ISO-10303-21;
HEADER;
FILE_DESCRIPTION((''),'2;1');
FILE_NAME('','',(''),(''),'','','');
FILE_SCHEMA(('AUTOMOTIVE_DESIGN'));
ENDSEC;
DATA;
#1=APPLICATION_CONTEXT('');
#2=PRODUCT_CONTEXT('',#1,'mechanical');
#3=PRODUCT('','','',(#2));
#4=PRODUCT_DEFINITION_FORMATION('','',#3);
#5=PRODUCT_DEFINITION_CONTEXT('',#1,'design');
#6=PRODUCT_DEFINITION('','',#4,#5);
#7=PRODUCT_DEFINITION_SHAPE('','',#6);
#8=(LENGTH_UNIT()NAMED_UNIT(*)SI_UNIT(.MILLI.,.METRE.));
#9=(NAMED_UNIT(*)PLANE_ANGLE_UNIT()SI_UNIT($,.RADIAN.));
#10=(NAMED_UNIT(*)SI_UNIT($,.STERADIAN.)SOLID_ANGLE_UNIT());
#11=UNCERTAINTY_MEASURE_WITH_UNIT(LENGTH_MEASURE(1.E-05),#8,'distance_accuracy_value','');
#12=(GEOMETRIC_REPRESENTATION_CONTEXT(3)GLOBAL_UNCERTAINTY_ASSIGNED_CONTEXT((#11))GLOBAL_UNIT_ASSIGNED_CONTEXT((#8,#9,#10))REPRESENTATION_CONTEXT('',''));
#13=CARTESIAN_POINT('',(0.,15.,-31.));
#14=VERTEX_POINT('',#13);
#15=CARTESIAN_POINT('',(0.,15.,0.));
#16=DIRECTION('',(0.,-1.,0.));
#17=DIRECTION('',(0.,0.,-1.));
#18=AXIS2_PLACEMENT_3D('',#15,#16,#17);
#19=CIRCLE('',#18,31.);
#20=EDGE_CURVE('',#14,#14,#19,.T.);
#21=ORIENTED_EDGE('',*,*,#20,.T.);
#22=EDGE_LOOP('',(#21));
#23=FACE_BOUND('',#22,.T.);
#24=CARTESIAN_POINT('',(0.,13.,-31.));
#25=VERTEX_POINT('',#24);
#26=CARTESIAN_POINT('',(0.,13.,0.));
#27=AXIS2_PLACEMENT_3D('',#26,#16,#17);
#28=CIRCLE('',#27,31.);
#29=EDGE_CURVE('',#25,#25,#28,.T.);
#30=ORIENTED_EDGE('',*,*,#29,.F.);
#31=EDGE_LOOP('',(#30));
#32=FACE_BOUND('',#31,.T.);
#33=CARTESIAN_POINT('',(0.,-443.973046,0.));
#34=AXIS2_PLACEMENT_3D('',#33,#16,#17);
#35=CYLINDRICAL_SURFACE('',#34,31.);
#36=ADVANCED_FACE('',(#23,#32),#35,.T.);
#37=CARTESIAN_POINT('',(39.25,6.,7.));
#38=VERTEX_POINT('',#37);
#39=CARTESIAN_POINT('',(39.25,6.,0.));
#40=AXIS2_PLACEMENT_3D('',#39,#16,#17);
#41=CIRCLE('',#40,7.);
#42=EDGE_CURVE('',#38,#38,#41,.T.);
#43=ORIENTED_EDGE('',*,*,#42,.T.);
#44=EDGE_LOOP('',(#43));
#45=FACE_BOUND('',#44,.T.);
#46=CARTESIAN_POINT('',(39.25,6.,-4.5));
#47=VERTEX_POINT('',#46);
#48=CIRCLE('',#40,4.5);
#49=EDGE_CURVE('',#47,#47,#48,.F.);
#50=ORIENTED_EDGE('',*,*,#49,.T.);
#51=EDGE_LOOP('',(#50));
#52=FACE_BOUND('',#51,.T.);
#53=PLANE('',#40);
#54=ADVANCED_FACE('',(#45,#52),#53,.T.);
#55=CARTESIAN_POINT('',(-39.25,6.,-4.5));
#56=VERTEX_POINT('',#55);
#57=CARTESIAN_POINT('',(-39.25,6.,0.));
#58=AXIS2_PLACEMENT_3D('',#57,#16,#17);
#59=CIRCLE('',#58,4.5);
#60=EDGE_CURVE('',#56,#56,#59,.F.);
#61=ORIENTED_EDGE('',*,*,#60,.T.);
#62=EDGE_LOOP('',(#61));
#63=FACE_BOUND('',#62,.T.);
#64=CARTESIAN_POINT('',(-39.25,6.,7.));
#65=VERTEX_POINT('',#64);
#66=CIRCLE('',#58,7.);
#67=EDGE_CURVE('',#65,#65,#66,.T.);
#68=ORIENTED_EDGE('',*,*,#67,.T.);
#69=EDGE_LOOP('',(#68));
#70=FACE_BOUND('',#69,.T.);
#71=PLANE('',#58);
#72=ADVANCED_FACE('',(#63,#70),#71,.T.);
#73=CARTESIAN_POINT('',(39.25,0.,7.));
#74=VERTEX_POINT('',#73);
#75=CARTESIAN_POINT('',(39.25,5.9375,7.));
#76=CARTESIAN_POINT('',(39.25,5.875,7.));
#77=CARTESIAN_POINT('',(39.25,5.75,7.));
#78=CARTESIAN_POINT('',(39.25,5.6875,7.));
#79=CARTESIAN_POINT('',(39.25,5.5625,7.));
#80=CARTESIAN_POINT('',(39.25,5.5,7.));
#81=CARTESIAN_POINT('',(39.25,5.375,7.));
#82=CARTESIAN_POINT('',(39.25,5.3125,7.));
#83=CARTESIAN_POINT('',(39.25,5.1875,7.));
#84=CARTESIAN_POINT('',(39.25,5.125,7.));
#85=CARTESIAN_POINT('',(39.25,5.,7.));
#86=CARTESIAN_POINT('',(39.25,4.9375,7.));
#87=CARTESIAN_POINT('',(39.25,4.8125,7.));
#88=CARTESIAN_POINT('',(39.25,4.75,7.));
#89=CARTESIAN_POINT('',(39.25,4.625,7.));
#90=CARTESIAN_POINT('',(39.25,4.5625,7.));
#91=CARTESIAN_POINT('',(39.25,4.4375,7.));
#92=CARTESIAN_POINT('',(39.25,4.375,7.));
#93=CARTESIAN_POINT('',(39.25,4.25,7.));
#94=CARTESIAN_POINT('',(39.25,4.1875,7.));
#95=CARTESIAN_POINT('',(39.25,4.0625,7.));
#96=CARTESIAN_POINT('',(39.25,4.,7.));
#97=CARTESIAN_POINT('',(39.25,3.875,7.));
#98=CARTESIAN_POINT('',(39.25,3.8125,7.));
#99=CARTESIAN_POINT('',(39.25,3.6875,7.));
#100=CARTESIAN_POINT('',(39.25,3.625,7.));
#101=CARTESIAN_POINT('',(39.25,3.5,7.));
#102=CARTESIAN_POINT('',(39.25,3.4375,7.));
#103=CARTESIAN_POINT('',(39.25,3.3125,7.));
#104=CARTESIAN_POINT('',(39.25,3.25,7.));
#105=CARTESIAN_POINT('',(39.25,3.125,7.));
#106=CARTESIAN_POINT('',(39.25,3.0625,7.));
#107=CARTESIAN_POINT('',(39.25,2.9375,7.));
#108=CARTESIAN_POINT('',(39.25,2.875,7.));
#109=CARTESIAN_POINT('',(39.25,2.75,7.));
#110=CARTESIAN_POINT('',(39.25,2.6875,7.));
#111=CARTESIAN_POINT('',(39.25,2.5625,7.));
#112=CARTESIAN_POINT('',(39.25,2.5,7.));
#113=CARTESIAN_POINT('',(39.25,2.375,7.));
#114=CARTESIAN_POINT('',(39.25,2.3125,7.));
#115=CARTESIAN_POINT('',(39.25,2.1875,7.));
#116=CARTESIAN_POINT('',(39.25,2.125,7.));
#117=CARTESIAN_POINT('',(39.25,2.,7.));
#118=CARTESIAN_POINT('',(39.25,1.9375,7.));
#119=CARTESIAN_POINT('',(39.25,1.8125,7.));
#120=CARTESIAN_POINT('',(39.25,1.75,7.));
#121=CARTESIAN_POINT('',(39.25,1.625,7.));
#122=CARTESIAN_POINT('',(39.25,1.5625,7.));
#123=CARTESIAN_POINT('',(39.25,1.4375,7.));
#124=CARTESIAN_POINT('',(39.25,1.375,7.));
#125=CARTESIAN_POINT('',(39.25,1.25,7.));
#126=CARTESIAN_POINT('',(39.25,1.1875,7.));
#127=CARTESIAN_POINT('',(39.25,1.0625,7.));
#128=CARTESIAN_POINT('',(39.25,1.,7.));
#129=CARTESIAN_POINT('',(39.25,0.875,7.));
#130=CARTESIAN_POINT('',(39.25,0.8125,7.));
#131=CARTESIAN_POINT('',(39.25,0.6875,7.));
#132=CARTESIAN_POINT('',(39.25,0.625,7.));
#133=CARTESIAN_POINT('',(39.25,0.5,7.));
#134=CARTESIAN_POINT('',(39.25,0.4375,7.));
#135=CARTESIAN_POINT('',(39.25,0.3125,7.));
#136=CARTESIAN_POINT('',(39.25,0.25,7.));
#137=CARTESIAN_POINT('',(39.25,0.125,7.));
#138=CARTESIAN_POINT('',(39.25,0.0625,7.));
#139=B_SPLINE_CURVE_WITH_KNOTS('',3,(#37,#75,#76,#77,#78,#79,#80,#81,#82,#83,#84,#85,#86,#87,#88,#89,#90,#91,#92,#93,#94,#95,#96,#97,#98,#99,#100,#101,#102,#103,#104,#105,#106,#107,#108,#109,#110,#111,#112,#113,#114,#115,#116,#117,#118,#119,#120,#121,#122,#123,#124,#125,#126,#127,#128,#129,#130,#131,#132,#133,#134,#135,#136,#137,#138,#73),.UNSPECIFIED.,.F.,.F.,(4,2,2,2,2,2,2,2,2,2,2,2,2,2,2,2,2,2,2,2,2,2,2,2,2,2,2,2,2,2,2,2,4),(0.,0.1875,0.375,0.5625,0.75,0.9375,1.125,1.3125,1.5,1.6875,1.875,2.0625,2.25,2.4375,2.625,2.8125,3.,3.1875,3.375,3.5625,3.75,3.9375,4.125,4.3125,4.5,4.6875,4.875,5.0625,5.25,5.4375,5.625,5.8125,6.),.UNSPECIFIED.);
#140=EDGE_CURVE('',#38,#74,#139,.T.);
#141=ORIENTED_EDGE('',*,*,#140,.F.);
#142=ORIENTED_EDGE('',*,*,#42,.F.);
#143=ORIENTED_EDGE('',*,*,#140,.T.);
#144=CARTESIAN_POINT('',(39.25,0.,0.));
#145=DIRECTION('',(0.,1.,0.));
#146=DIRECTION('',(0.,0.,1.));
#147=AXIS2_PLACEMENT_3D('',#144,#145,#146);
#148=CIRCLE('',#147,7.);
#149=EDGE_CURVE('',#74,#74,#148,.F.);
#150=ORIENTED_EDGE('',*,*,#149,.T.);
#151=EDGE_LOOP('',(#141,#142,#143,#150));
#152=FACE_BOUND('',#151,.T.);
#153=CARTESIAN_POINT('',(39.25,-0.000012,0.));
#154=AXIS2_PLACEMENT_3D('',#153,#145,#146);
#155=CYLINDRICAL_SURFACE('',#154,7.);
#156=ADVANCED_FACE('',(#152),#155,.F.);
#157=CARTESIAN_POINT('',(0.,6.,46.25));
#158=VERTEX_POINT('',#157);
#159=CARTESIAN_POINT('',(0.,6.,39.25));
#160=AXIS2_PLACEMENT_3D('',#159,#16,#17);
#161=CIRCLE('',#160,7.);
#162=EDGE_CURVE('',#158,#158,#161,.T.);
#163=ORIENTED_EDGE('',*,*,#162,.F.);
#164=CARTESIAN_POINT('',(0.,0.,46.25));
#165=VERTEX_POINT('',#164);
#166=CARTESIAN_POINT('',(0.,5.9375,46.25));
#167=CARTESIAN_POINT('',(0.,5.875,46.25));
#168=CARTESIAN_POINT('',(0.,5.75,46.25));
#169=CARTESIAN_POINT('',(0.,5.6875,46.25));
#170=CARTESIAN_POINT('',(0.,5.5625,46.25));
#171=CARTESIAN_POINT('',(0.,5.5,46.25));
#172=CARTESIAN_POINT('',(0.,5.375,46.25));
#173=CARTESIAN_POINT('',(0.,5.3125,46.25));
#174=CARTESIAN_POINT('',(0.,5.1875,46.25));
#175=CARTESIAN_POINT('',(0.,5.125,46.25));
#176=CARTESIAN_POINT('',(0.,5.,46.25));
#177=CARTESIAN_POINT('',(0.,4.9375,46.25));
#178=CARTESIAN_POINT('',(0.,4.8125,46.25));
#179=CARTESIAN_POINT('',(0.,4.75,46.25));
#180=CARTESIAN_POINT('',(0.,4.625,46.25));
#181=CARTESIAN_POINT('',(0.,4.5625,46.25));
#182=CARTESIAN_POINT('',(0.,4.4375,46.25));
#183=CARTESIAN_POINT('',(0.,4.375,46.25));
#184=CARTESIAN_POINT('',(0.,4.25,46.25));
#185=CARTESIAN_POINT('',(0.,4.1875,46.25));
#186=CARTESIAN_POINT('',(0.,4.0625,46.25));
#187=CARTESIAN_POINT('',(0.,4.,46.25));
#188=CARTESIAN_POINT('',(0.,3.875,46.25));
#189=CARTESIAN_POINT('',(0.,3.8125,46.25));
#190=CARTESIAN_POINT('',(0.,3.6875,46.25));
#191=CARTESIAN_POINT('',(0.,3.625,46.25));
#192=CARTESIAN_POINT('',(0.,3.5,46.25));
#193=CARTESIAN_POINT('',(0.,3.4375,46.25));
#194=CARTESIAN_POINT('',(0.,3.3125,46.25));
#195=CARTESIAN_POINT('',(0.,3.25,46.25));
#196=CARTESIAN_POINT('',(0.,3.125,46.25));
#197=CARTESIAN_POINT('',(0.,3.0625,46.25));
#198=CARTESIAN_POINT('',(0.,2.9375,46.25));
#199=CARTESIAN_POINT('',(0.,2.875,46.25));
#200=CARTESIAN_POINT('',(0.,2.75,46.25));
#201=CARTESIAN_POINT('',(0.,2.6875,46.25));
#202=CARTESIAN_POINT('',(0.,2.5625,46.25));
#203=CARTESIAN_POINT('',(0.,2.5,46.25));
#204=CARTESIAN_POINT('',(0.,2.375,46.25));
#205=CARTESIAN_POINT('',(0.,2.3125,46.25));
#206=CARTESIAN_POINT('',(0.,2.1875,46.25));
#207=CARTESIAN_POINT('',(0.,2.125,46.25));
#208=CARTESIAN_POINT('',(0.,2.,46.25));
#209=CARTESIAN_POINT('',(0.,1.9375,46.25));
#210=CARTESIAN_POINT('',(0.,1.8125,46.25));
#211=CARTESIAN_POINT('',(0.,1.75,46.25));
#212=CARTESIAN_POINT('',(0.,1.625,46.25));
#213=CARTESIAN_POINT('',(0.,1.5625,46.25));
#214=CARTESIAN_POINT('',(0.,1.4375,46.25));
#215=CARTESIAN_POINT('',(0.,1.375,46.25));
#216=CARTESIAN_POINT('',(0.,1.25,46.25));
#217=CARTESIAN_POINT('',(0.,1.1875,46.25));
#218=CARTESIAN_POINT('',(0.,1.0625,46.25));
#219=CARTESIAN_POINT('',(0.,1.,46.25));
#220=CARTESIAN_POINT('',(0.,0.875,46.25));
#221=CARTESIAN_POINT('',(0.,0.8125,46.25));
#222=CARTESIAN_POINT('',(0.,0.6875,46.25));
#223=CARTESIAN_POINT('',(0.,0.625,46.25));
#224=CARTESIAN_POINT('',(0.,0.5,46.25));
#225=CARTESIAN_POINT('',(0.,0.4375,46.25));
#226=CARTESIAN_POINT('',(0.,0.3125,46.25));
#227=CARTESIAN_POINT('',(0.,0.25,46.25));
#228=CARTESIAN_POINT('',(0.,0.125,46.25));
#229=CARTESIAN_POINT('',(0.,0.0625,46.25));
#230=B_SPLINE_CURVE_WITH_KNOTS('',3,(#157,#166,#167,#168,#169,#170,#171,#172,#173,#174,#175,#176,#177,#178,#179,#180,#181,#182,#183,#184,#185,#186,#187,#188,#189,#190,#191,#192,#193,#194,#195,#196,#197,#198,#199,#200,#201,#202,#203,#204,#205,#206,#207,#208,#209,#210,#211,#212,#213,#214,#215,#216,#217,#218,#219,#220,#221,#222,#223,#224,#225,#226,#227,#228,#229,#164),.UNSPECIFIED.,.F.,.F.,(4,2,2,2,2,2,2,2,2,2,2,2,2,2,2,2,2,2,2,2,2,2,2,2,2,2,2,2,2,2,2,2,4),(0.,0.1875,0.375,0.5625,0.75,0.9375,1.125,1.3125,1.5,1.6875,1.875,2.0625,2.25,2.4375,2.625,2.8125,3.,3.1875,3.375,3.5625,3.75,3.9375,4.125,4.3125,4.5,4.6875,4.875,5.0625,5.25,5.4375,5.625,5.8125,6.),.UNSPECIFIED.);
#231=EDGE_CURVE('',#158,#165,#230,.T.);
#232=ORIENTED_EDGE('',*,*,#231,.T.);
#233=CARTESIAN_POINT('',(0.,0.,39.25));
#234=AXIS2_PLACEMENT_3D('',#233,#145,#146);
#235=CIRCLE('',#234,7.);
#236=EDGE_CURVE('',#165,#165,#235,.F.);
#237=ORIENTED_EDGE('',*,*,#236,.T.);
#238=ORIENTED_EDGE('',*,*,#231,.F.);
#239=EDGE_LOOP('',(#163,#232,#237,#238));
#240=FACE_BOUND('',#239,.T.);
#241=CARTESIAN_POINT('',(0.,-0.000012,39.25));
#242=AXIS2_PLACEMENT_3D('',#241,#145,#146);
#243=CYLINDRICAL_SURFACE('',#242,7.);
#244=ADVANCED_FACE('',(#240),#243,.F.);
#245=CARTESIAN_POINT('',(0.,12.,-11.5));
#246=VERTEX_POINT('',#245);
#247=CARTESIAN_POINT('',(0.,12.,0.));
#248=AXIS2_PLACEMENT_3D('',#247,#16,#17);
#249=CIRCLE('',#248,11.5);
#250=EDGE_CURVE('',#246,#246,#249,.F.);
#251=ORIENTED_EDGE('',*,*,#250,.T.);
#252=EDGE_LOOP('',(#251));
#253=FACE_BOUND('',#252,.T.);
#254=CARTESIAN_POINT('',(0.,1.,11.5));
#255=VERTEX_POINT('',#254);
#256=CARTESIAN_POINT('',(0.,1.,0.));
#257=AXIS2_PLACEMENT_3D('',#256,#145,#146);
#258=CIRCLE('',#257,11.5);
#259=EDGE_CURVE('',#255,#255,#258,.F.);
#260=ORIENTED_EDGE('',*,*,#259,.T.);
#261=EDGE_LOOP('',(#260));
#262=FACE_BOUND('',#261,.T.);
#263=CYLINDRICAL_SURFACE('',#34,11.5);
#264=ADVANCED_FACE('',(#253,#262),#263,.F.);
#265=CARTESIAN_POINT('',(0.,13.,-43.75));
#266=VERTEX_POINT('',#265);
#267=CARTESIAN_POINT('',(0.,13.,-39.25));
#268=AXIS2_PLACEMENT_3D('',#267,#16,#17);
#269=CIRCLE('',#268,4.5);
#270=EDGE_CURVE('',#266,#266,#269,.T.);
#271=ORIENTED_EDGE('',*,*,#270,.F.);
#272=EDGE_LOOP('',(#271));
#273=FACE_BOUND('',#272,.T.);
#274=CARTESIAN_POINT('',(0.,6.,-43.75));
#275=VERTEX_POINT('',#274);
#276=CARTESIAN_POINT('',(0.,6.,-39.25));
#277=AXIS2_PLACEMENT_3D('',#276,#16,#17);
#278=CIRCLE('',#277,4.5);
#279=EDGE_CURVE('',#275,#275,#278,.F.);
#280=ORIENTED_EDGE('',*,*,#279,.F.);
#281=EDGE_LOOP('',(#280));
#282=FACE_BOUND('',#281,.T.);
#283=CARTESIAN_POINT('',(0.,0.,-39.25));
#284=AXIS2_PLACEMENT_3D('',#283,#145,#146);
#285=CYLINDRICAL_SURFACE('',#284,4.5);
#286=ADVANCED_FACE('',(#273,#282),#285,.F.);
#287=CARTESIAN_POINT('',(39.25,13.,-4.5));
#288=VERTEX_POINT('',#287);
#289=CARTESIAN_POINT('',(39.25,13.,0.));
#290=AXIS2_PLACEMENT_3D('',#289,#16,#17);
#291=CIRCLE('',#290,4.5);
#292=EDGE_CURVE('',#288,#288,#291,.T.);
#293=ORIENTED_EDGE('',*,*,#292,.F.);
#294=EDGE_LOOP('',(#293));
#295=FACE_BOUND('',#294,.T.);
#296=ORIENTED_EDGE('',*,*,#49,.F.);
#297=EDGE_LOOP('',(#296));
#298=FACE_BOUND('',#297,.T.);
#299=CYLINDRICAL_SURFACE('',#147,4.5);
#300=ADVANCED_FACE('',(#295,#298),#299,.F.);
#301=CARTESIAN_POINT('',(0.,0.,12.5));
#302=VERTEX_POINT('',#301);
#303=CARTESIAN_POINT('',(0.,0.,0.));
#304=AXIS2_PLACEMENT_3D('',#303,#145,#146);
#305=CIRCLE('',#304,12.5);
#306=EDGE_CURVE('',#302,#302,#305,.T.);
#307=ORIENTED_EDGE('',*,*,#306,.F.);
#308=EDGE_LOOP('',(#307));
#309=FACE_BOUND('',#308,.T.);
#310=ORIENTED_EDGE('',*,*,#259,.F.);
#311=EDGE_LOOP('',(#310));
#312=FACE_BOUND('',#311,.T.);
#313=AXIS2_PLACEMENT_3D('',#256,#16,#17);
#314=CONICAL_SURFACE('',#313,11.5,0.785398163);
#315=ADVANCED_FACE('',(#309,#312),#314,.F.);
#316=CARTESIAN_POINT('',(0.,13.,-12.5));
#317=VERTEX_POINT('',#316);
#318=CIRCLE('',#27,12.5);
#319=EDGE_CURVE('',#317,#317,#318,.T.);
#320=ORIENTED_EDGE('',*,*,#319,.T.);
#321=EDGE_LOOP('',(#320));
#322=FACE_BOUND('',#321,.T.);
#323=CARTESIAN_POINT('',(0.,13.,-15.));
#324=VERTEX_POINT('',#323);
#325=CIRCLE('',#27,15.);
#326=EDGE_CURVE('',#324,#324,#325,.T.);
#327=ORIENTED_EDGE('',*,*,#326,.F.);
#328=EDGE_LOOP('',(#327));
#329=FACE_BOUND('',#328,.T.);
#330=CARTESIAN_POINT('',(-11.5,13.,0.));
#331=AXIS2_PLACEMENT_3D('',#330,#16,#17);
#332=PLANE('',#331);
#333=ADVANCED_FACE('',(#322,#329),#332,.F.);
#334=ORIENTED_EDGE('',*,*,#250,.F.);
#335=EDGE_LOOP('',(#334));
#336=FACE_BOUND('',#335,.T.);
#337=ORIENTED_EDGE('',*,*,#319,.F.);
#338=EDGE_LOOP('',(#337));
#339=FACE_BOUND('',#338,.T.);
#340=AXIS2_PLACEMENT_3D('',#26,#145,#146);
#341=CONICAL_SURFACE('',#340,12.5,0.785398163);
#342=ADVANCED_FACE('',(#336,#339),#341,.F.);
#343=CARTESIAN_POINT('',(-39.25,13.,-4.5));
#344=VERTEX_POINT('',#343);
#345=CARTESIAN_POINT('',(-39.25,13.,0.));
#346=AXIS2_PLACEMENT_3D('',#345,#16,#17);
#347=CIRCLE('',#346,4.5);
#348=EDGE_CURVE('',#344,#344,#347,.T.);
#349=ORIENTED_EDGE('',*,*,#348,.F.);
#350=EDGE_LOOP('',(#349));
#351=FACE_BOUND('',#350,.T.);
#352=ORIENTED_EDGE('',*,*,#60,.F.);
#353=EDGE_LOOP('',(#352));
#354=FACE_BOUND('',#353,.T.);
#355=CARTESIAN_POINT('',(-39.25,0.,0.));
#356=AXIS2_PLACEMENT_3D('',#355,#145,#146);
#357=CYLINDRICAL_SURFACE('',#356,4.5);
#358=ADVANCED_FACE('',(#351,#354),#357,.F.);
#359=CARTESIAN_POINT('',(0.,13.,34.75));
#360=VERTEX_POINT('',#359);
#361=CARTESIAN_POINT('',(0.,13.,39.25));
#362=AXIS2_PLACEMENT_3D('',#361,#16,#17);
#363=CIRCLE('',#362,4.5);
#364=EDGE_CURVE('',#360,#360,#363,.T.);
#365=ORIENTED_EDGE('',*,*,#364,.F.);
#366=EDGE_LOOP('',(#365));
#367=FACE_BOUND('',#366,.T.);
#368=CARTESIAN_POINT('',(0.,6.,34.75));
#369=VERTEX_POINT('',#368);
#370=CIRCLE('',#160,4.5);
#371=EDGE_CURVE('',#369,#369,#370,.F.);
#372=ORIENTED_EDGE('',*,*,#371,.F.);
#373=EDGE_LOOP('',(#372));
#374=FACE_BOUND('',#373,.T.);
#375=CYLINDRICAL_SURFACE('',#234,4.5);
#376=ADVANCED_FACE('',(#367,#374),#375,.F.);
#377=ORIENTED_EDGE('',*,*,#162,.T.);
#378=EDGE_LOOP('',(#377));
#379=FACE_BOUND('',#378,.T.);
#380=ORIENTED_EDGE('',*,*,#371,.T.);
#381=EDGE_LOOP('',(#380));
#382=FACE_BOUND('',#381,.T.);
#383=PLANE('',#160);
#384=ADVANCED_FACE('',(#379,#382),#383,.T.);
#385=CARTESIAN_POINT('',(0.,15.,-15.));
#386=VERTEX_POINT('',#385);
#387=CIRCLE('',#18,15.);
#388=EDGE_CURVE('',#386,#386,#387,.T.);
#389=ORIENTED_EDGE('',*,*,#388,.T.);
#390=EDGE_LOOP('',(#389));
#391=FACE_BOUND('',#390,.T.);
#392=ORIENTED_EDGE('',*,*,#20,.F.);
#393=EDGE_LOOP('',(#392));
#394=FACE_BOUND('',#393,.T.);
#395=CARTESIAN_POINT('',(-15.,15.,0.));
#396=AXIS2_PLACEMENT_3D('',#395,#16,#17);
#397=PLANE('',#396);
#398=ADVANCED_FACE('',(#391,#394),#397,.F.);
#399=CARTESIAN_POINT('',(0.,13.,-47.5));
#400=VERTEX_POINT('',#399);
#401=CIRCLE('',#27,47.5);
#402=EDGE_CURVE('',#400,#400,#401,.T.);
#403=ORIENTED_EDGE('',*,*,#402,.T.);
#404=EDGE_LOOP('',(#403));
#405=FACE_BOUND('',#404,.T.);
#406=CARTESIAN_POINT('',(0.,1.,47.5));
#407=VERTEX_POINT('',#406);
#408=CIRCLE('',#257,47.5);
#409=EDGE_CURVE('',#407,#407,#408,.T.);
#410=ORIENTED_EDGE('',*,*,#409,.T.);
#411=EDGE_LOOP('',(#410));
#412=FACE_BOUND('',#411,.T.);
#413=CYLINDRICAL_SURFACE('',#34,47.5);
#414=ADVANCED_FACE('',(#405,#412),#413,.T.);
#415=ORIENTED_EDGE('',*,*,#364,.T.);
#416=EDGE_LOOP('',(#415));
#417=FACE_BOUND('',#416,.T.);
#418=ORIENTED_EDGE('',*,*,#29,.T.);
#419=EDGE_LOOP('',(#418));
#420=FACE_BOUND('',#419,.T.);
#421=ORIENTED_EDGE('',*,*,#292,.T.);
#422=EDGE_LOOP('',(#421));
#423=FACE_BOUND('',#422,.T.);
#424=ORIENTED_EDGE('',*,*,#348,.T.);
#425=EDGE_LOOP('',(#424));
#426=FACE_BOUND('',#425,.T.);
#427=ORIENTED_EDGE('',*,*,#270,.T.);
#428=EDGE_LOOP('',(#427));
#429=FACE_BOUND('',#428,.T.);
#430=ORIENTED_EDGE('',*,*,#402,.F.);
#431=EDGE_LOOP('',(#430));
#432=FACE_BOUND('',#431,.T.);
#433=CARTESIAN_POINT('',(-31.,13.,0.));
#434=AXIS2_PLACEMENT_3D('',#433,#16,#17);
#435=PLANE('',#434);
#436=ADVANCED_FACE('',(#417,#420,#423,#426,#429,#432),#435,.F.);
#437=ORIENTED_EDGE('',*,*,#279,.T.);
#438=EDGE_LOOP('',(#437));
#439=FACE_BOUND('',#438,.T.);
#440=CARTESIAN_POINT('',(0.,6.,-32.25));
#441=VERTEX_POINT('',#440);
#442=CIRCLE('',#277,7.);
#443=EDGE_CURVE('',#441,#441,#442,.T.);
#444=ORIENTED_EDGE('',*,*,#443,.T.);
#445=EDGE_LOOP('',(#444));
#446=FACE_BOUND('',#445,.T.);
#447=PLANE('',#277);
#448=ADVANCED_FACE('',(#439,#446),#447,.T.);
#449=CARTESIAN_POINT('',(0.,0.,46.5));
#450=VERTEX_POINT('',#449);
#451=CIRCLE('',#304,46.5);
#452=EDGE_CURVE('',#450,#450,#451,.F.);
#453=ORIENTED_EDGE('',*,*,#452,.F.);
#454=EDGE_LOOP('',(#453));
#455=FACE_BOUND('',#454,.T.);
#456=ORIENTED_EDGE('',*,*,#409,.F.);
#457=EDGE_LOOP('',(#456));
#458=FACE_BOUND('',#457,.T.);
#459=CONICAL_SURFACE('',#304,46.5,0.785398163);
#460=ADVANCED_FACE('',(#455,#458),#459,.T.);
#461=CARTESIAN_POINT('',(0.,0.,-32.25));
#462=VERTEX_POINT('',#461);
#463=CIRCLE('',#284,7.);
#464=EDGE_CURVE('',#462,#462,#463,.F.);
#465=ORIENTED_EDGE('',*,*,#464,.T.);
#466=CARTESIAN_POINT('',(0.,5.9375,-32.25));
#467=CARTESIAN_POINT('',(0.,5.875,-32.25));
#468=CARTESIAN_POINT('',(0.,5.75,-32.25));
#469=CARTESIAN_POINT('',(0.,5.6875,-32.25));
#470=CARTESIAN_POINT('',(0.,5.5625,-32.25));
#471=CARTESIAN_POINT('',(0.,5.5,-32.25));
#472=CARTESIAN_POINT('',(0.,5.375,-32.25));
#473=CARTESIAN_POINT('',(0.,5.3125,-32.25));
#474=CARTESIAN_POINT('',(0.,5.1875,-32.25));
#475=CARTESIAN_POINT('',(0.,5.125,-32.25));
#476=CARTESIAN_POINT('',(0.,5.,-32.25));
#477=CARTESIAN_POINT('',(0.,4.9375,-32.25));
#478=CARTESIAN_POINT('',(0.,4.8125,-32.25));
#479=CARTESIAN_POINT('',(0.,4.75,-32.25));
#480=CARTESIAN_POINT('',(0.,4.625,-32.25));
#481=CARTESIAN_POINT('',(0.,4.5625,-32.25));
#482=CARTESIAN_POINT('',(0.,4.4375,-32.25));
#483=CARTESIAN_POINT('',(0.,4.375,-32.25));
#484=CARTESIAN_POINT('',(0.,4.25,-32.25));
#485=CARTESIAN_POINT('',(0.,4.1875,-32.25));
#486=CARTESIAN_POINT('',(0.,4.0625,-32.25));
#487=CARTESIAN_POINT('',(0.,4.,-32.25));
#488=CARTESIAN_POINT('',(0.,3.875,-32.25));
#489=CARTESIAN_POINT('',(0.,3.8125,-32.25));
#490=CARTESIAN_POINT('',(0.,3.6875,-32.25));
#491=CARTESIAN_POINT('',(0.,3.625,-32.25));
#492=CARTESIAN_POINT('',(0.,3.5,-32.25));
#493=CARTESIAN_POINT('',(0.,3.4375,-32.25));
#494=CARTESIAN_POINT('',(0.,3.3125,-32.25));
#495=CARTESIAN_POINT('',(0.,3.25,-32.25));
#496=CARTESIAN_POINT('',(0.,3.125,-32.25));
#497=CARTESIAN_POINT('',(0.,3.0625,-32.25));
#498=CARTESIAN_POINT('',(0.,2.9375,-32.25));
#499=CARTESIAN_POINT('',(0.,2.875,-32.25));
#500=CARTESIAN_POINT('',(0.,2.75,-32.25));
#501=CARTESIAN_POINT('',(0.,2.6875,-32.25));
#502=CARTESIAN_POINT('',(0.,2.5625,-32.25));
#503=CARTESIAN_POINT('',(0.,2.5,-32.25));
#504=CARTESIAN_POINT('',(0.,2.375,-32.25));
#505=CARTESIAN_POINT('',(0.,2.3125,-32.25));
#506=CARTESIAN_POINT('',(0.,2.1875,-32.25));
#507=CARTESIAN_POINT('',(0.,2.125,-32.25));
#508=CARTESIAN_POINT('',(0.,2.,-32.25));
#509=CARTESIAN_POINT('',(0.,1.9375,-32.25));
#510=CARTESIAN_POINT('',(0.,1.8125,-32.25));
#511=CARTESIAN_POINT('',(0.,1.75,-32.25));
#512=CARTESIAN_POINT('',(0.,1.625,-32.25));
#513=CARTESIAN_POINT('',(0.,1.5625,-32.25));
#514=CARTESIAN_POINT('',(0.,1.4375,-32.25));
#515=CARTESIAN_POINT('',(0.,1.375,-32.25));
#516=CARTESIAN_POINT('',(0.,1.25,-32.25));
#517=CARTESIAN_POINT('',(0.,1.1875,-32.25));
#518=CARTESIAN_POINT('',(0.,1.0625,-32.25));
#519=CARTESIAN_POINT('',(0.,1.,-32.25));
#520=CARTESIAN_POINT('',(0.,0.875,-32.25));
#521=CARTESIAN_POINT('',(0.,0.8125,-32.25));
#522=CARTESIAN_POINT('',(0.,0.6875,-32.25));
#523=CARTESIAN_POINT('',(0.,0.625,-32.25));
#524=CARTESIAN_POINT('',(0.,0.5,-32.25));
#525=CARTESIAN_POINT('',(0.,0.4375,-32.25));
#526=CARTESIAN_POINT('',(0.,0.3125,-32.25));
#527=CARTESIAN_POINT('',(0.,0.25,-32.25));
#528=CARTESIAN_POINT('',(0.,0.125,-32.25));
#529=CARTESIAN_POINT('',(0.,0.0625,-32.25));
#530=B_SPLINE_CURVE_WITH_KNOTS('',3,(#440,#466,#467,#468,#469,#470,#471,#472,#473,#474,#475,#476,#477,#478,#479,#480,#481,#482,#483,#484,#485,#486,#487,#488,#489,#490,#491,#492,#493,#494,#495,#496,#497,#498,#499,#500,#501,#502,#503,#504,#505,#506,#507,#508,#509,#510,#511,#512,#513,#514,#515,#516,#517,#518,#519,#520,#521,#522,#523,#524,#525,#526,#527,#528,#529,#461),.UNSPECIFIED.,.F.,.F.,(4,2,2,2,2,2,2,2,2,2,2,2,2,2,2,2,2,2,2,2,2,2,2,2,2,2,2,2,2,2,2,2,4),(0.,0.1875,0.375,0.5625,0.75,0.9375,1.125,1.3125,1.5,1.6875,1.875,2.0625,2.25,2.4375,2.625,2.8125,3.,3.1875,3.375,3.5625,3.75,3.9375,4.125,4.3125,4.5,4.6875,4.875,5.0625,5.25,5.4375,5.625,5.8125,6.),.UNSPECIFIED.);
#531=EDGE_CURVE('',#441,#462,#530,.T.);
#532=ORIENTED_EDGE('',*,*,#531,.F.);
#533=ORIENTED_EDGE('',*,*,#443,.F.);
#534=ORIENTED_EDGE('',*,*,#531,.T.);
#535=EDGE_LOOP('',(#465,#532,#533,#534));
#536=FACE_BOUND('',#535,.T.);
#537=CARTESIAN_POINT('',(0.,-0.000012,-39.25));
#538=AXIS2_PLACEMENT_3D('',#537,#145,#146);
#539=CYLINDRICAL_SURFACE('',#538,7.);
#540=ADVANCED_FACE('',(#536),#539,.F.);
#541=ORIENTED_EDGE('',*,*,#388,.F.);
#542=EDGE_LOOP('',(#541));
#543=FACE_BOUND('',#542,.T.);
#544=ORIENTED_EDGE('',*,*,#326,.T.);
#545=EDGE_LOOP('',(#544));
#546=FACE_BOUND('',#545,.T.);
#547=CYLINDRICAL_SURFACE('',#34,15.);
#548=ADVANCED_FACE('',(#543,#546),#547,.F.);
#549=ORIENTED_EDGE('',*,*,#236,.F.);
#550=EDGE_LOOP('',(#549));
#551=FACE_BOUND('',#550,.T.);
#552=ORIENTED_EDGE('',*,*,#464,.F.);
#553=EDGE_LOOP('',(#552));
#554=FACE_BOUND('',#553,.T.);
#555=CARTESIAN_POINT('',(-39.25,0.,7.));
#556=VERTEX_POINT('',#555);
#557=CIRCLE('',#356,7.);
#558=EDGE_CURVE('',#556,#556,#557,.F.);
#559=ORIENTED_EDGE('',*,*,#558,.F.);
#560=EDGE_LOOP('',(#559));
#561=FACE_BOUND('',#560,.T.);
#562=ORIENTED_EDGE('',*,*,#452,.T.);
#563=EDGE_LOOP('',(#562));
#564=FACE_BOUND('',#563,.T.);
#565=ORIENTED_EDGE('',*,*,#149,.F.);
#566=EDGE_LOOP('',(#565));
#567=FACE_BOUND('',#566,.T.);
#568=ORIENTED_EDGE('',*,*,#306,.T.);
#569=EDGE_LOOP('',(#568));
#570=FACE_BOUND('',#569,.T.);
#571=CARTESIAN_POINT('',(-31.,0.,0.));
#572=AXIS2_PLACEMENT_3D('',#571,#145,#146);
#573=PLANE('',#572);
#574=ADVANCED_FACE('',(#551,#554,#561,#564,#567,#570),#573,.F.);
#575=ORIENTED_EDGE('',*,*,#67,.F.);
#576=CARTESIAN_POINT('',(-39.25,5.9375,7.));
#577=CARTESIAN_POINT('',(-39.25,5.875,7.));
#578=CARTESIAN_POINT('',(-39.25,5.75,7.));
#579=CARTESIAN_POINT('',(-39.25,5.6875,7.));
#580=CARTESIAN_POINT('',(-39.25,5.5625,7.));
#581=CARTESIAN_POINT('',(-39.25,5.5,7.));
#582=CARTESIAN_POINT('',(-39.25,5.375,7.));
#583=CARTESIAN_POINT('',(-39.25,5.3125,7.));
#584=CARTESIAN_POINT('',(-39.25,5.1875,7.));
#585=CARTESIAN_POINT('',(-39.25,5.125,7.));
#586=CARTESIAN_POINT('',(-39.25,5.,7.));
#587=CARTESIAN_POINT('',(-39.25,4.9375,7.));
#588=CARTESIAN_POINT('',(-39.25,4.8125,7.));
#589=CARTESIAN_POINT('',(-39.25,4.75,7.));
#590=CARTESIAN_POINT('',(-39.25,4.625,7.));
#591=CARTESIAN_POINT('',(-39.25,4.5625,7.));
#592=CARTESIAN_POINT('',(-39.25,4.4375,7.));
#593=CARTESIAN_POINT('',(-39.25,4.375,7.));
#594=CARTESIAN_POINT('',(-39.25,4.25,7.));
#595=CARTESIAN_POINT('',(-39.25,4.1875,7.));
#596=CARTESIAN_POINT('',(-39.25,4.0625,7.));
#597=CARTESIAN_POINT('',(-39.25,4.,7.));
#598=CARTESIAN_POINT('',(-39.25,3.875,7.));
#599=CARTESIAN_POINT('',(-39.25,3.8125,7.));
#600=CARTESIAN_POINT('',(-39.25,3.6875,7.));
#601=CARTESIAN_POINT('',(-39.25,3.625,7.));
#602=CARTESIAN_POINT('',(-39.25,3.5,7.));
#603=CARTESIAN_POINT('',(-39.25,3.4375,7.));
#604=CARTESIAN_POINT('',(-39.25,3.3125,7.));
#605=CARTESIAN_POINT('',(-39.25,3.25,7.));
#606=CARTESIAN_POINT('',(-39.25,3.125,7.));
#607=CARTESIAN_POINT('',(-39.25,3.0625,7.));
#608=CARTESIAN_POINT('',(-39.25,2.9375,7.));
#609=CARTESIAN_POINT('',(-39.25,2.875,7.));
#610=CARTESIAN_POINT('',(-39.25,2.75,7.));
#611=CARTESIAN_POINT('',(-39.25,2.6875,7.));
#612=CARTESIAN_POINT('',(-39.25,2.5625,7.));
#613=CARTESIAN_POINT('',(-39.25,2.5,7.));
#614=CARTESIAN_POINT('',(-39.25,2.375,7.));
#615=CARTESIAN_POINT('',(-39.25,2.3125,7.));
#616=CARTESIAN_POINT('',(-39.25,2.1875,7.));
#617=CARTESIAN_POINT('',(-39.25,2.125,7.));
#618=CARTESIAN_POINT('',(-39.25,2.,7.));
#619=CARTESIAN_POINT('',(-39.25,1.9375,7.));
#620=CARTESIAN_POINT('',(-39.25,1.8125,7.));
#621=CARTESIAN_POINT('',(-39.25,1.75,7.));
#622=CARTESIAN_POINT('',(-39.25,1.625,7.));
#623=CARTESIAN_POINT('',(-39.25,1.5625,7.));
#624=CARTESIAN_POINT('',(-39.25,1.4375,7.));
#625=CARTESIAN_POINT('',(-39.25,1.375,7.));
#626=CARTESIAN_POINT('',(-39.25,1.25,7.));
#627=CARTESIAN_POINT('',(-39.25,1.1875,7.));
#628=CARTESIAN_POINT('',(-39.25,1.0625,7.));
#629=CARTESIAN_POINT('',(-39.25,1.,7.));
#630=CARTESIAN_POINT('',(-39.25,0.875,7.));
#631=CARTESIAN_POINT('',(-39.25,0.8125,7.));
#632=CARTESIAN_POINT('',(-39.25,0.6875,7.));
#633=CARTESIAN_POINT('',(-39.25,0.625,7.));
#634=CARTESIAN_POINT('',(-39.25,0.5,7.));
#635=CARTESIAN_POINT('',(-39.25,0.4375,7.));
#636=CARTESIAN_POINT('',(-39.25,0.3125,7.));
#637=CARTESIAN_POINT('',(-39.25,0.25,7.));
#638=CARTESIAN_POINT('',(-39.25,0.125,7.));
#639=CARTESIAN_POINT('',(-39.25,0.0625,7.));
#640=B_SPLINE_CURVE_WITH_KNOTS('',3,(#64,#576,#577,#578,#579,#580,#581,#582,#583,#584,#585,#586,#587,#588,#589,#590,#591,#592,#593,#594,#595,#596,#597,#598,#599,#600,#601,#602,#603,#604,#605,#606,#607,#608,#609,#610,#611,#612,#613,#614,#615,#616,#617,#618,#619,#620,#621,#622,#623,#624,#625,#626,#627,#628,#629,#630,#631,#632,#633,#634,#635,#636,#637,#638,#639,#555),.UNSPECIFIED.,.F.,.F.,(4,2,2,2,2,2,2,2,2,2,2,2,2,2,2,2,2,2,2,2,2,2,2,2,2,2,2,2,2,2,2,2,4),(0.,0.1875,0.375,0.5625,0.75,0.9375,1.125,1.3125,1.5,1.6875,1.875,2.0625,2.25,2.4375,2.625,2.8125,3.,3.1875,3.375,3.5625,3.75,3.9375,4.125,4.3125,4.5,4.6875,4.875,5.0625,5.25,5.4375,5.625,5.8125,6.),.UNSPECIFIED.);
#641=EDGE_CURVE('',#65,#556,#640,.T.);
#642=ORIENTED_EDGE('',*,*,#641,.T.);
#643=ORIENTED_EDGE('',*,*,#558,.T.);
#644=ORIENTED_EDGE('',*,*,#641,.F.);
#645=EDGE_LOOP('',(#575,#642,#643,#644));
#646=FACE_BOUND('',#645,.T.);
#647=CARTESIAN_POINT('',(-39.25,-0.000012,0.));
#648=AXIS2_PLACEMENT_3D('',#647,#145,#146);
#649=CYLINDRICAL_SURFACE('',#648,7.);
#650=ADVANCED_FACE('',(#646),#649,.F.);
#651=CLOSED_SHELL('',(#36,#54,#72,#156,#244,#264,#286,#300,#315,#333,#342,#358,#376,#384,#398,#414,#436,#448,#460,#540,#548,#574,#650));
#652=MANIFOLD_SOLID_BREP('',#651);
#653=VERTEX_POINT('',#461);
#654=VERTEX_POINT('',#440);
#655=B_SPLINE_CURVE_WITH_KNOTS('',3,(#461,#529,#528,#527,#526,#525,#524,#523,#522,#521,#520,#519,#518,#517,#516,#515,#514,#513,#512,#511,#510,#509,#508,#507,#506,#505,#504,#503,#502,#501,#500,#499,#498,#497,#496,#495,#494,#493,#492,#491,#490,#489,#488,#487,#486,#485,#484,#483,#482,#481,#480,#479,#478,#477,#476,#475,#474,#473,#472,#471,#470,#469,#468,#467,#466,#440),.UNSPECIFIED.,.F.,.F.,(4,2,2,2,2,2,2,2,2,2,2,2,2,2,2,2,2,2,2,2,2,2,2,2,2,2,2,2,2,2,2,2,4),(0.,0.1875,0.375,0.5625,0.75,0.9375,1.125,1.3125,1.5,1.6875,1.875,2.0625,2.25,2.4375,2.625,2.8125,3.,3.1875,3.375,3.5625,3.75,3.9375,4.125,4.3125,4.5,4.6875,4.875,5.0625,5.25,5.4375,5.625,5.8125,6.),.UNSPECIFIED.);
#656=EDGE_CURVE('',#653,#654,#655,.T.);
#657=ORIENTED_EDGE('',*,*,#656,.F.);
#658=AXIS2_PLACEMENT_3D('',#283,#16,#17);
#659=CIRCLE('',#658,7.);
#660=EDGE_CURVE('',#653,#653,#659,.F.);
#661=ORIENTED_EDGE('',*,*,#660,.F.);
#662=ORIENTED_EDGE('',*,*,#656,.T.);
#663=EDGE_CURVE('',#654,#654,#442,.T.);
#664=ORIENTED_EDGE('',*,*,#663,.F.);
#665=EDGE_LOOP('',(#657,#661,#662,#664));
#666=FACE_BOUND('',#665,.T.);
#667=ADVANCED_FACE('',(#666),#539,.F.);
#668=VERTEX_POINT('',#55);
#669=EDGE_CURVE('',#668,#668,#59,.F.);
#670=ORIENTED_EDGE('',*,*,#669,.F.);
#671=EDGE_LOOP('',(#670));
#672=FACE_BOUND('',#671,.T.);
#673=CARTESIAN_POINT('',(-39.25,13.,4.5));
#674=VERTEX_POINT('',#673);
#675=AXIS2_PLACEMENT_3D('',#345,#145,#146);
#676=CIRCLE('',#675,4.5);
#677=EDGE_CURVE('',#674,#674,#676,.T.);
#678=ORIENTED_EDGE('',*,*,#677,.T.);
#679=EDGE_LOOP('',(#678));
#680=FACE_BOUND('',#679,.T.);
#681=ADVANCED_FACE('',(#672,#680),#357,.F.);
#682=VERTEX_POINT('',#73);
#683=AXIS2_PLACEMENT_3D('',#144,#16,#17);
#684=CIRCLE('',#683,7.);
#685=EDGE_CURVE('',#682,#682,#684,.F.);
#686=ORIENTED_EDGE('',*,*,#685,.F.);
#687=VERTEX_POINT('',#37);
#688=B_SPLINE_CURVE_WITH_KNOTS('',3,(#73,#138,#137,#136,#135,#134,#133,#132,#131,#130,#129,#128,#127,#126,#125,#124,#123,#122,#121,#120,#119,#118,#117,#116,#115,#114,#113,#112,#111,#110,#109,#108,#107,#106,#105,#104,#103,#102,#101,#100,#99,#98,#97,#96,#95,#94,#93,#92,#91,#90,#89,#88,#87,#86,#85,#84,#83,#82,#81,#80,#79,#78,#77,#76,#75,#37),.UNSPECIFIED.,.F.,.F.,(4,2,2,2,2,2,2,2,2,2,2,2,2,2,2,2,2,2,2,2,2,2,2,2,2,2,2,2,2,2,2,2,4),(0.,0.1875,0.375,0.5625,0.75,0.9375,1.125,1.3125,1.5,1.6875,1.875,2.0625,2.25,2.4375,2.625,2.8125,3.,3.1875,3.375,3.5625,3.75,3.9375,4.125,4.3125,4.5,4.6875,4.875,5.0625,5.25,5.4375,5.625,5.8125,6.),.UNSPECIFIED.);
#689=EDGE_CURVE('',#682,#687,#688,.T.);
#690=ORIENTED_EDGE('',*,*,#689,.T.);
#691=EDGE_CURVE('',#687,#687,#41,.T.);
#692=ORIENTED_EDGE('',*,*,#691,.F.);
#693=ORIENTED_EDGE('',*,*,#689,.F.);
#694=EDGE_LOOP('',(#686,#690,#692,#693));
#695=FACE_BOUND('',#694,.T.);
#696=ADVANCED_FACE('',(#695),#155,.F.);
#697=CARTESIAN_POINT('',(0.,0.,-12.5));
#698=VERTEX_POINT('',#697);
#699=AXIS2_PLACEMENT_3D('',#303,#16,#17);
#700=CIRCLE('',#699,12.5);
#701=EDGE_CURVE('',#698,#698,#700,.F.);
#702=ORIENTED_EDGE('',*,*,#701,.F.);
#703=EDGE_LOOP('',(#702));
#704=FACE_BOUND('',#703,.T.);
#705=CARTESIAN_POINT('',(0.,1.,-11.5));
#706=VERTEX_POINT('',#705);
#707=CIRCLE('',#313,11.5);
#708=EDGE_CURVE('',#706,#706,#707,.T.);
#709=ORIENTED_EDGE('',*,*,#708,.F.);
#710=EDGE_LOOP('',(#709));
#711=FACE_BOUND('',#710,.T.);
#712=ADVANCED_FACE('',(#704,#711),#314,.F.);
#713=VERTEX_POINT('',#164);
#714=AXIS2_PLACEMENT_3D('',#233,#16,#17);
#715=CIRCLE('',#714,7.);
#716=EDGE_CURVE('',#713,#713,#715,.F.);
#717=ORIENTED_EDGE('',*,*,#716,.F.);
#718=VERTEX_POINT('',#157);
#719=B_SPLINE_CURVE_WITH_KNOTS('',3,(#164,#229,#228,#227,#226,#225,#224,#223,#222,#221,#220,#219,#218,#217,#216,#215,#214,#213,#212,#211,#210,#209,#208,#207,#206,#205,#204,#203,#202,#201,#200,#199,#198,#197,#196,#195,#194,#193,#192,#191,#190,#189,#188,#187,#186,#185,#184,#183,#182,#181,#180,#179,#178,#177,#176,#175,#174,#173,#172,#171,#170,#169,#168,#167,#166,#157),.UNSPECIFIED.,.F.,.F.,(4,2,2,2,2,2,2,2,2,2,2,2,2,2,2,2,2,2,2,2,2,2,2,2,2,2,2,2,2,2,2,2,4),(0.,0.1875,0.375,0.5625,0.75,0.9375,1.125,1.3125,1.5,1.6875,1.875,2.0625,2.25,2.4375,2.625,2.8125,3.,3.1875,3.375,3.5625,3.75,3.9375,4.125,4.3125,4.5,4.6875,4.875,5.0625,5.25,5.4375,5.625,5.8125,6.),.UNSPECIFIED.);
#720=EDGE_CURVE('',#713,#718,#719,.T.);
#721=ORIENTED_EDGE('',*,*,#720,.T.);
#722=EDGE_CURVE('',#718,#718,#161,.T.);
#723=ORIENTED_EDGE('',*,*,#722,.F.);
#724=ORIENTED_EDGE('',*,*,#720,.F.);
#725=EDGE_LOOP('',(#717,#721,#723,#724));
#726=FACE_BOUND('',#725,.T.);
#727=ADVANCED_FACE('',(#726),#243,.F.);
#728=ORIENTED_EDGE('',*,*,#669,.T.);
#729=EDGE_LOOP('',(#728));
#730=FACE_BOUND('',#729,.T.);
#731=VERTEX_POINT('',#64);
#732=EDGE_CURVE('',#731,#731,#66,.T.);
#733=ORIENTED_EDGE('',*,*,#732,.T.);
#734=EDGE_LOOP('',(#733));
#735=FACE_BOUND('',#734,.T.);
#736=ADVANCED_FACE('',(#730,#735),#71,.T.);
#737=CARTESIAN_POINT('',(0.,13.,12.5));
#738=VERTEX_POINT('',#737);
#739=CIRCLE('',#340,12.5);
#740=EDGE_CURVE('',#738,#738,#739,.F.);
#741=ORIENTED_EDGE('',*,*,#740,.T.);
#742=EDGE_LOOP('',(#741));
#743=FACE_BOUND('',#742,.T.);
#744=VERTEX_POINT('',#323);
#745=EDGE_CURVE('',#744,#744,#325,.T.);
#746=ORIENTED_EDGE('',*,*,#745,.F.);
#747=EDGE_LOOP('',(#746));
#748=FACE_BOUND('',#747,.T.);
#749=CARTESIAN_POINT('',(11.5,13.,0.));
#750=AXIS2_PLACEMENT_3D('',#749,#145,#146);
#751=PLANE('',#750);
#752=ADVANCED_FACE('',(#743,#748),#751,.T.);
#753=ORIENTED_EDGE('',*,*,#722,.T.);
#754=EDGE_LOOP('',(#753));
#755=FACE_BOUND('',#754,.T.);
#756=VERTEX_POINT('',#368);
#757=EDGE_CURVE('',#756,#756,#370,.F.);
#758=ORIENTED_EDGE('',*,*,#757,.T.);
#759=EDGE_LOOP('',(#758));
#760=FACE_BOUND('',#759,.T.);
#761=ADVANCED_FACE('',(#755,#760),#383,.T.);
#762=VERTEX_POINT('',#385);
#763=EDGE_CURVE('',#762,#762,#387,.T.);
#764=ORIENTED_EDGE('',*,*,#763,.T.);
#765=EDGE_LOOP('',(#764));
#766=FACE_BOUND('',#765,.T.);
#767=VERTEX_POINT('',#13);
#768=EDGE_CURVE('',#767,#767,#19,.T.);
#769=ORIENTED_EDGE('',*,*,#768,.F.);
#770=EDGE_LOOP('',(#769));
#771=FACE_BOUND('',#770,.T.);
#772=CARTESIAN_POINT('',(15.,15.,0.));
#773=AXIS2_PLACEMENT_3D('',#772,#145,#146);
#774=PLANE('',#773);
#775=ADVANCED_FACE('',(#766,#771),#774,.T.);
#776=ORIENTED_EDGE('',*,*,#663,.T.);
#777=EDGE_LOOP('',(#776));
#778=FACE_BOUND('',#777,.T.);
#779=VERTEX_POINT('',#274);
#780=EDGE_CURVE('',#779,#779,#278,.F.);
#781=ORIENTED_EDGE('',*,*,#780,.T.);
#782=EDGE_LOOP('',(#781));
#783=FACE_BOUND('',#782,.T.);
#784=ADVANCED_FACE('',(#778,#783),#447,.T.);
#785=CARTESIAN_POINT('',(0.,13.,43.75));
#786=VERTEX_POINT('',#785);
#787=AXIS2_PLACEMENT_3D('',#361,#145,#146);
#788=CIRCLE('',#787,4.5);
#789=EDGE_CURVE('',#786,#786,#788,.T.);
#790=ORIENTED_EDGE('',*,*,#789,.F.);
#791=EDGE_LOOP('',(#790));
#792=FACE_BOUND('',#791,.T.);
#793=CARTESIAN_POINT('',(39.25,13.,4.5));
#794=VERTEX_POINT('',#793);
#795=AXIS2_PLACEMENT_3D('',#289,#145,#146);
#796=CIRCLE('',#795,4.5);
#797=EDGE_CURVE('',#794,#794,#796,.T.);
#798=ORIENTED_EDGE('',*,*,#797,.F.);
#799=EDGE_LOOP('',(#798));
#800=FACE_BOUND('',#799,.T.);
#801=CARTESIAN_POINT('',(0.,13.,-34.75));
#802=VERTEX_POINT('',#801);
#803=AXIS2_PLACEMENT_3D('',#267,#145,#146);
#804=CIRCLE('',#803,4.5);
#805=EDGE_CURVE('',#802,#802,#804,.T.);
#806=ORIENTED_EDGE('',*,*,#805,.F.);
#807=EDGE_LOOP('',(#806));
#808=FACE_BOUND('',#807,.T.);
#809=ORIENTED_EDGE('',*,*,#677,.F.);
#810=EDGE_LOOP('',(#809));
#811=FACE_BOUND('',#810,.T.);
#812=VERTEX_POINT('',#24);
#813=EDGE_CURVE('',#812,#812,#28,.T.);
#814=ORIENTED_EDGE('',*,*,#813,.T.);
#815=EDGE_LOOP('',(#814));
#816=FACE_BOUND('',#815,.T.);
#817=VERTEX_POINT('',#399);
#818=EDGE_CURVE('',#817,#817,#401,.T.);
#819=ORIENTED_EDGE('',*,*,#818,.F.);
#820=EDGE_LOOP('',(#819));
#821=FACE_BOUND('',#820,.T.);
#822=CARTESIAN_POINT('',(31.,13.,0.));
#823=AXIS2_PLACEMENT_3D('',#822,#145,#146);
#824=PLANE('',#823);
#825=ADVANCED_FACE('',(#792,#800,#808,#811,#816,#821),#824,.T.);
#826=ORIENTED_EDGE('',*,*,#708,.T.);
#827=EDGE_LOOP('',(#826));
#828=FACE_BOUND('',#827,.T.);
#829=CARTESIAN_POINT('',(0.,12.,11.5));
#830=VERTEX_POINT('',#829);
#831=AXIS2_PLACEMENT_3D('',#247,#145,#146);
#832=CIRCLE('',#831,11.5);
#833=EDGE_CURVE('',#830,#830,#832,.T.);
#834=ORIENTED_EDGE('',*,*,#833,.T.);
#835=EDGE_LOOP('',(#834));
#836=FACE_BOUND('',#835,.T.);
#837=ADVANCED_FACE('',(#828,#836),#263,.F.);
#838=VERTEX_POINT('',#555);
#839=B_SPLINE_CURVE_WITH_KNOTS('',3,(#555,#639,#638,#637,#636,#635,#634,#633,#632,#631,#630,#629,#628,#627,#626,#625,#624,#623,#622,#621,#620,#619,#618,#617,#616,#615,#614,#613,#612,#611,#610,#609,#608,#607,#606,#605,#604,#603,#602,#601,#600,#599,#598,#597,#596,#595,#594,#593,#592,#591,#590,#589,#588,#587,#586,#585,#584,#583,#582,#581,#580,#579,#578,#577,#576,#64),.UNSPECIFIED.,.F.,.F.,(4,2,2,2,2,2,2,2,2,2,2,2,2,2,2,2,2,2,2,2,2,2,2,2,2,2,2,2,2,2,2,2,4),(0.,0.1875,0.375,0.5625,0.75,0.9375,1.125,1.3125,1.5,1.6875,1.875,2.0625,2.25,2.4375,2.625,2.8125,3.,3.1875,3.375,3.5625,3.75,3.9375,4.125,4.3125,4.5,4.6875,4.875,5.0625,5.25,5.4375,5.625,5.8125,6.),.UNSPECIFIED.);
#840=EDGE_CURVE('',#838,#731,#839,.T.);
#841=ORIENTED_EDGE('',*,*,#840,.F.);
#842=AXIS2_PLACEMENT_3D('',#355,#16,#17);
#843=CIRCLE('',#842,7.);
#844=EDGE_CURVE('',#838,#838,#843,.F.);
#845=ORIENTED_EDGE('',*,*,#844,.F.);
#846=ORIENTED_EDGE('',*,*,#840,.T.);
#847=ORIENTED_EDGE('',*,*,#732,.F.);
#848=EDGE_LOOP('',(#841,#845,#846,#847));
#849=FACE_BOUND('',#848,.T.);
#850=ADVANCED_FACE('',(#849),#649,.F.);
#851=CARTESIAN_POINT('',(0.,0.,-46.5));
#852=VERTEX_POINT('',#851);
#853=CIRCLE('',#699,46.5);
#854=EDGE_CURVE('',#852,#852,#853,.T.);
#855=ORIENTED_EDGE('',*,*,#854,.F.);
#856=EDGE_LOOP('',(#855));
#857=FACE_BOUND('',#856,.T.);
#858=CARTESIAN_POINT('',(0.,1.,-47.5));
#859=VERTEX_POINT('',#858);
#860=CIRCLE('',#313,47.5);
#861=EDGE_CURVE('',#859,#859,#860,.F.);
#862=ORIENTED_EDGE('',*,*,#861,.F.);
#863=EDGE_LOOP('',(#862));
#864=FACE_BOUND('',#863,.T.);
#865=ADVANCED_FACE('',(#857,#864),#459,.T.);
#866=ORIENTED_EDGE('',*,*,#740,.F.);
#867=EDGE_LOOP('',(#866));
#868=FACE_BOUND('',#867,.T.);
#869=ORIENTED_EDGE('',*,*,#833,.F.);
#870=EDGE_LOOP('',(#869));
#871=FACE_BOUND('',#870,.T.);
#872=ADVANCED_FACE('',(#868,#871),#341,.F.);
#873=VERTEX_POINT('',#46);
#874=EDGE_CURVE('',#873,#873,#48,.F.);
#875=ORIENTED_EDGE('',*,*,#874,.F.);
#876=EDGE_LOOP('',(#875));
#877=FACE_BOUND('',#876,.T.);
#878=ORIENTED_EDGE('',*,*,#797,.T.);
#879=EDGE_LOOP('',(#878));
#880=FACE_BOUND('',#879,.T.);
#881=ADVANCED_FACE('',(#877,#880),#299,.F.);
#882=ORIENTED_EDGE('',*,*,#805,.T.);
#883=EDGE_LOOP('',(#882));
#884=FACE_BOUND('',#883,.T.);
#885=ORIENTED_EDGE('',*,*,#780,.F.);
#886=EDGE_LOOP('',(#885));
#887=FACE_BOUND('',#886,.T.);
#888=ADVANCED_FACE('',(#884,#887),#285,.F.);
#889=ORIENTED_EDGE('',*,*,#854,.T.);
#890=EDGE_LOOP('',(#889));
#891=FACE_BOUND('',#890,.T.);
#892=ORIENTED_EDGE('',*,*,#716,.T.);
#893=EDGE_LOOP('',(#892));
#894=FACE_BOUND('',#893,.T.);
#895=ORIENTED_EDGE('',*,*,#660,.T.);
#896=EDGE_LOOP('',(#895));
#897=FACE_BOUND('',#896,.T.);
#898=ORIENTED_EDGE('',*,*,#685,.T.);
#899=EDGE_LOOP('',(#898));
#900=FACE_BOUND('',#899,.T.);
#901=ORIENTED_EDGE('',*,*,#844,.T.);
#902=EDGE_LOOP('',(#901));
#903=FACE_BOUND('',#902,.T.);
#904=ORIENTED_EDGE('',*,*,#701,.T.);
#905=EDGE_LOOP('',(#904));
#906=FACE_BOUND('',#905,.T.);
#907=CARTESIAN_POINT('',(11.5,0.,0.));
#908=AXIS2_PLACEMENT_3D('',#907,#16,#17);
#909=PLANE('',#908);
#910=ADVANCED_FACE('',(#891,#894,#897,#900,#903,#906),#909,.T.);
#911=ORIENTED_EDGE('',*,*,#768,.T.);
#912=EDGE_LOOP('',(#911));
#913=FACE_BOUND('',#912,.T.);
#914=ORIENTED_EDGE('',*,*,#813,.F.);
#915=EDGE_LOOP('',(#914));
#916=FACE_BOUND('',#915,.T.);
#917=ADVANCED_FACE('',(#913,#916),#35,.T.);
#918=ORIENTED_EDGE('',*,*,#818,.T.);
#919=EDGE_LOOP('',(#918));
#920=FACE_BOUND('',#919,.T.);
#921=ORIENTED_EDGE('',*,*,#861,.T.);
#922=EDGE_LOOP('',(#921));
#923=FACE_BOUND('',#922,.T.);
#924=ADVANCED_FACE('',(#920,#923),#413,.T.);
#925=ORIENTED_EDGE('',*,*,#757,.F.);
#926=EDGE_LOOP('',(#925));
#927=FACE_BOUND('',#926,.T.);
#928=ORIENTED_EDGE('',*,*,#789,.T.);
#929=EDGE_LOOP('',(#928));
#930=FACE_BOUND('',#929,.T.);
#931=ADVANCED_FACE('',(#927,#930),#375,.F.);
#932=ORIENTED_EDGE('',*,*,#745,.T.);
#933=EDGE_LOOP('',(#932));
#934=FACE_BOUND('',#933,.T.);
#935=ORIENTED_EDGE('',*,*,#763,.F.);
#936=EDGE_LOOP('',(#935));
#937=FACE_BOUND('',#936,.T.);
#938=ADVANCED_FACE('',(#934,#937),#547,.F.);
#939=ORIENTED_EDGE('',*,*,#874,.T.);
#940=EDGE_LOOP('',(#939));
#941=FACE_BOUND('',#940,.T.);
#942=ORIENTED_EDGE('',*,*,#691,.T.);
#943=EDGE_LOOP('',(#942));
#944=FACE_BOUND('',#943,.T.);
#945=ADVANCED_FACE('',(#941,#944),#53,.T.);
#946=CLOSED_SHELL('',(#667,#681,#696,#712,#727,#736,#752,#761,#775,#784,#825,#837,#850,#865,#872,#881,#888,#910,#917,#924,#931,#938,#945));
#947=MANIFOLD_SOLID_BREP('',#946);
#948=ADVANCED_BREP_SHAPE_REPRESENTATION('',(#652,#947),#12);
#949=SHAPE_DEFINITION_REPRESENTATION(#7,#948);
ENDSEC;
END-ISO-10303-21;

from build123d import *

# Parameters (mm, degrees)
REVOLVE_1_OUTLINE_R      = 47.5
REVOLVE_1_OUTLINE_R_2    = 11.5
REVOLVE_1_DEPTH          = 13
REVOLVE_START            = 13
REVOLVE_1_2_OUTLINE_R    = 31
REVOLVE_1_2_OUTLINE_R_2  = 15
REVOLVE_1_2_DEPTH        = 2
REVOLVE_1_3_OUTLINE_R    = 47.5
REVOLVE_1_3_OUTLINE_R_2  = 11.5
REVOLVE_1_3_DEPTH        = 13
REVOLVE_1_4_OUTLINE_R    = 31
REVOLVE_1_4_OUTLINE_R_2  = 15
REVOLVE_1_4_DEPTH        = 2
CUT_EXTRUDE_2_DEPTH      = 69.421487853
CUT_EXTRUDE_2_DEPTH_BACK = 69.421487853
SKETCH_2_R               = 4.5
CUT_EXTRUDE_3_DEPTH      = 69.82949949
CUT_EXTRUDE_3_DEPTH_BACK = 6
SKETCH_5_R               = 7
CHAMFER_2_SIZE           = 1
CHAMFER_3_SIZE           = 1
CHAMFER_4_SIZE           = 1


# Read off the part's stored shape, not the designer's step: 旋转1
with BuildPart() as part:
    # 旋转1 outline → 旋转1 (new body)
    with BuildSketch(Plane(origin=(0, 0, 0), x_dir=(1, 0, 0), z_dir=(0, 1, 0))):
        Circle(REVOLVE_1_OUTLINE_R)
        Circle(REVOLVE_1_OUTLINE_R_2, mode=Mode.SUBTRACT)
    extrude(amount=REVOLVE_1_DEPTH)

    # Revolve 1 2 outline → Revolve 1 2 (add)
    with BuildSketch(Plane(origin=(0, 0, 0), x_dir=(1, 0, 0), z_dir=(0, 1, 0)).offset(REVOLVE_START)):
        Circle(REVOLVE_1_2_OUTLINE_R)
        Circle(REVOLVE_1_2_OUTLINE_R_2, mode=Mode.SUBTRACT)
    extrude(amount=REVOLVE_1_2_DEPTH)


with BuildPart() as body_2:
    # Revolve 1 3 outline → Revolve 1 3 (new body)
    with BuildSketch(Plane(origin=(0, 0, 0), x_dir=(1, 0, 0), z_dir=(0, 1, 0))):
        Circle(REVOLVE_1_3_OUTLINE_R)
        Circle(REVOLVE_1_3_OUTLINE_R_2, mode=Mode.SUBTRACT)
    extrude(amount=REVOLVE_1_3_DEPTH)

    # Revolve 1 4 outline → Revolve 1 4 (add)
    with BuildSketch(Plane(origin=(0, 0, 0), x_dir=(1, 0, 0), z_dir=(0, 1, 0)).offset(REVOLVE_START)):
        Circle(REVOLVE_1_4_OUTLINE_R)
        Circle(REVOLVE_1_4_OUTLINE_R_2, mode=Mode.SUBTRACT)
    extrude(amount=REVOLVE_1_4_DEPTH)


with BuildPart() as cut_extrude_2_tool:
    # 草图2 → 切除-拉伸2 (new, two sides: drawn at the far end of the back side and taken through both)
    with BuildSketch(Plane(origin=(0, 13, 0), x_dir=(1, 0, 0), z_dir=(0, 1, 0)).offset(-CUT_EXTRUDE_2_DEPTH_BACK)):
        with Locations(Location((0, 39.25, 0), (0, 0, 270))):
            Circle(SKETCH_2_R)
        with Locations(Location((39.25, 0, 0), (0, 0, 270))):
            Circle(SKETCH_2_R)
        with Locations(Location((0, -39.25, 0), (0, 0, 270))):
            Circle(SKETCH_2_R)
        with Locations(Location((-39.25, 0, 0), (0, 0, 270))):
            Circle(SKETCH_2_R)
    extrude(amount=CUT_EXTRUDE_2_DEPTH + CUT_EXTRUDE_2_DEPTH_BACK)


with BuildPart() as part_1:
    add(part.part)

    # 切除-拉伸2: cut by cut_extrude_2_tool
    add(cut_extrude_2_tool.part, mode=Mode.SUBTRACT)


with BuildPart() as body_2_1:
    add(body_2.part)

    # 切除-拉伸2: cut by cut_extrude_2_tool
    add(cut_extrude_2_tool.part, mode=Mode.SUBTRACT)


with BuildPart() as cut_extrude_3_tool:
    # 草图5 → 切除-拉伸3 (new, two sides: drawn at the far end of the back side and taken through both)
    with BuildSketch(Plane.XZ.offset(-CUT_EXTRUDE_3_DEPTH_BACK)):
        with Locations(Location((0, 39.25, 0), (0, 0, 90))):
            Circle(SKETCH_5_R)
        with Locations(Location((39.25, 0, 0), (0, 0, 90))):
            Circle(SKETCH_5_R)
        with Locations(Location((0, -39.25, 0), (0, 0, 90))):
            Circle(SKETCH_5_R)
        with Locations(Location((-39.25, 0, 0), (0, 0, 90))):
            Circle(SKETCH_5_R)
    extrude(amount=CUT_EXTRUDE_3_DEPTH + CUT_EXTRUDE_3_DEPTH_BACK)


with BuildPart() as part_2:
    add(part_1.part)

    # 切除-拉伸3: cut by cut_extrude_3_tool
    add(cut_extrude_3_tool.part, mode=Mode.SUBTRACT)

    # 倒角2
    chamfer_2_edges = [part_2.edges().sort_by_distance(p)[0] for p in [
        (-11.5, 0, 0),
        (-11.5, 13, 0),
        (-47.5, 0, 0),
    ]]
    chamfer(chamfer_2_edges, length=CHAMFER_2_SIZE)


with BuildPart() as body_2_2:
    add(body_2_1.part)

    # 切除-拉伸3: cut by cut_extrude_3_tool
    add(cut_extrude_3_tool.part, mode=Mode.SUBTRACT)

    # 倒角3
    chamfer_3_edges = [body_2_2.edges().sort_by_distance(p)[0] for p in [
        (-47.5, 0, 0),
    ]]
    chamfer(chamfer_3_edges, length=CHAMFER_3_SIZE)

    # 倒角4
    chamfer_4_edges = [body_2_2.edges().sort_by_distance(p)[0] for p in [
        (-11.5, 13, 0),
        (-11.5, 0, 0),
    ]]
    chamfer(chamfer_4_edges, length=CHAMFER_4_SIZE)


solid = Compound([part_2.part, body_2_2.part])
